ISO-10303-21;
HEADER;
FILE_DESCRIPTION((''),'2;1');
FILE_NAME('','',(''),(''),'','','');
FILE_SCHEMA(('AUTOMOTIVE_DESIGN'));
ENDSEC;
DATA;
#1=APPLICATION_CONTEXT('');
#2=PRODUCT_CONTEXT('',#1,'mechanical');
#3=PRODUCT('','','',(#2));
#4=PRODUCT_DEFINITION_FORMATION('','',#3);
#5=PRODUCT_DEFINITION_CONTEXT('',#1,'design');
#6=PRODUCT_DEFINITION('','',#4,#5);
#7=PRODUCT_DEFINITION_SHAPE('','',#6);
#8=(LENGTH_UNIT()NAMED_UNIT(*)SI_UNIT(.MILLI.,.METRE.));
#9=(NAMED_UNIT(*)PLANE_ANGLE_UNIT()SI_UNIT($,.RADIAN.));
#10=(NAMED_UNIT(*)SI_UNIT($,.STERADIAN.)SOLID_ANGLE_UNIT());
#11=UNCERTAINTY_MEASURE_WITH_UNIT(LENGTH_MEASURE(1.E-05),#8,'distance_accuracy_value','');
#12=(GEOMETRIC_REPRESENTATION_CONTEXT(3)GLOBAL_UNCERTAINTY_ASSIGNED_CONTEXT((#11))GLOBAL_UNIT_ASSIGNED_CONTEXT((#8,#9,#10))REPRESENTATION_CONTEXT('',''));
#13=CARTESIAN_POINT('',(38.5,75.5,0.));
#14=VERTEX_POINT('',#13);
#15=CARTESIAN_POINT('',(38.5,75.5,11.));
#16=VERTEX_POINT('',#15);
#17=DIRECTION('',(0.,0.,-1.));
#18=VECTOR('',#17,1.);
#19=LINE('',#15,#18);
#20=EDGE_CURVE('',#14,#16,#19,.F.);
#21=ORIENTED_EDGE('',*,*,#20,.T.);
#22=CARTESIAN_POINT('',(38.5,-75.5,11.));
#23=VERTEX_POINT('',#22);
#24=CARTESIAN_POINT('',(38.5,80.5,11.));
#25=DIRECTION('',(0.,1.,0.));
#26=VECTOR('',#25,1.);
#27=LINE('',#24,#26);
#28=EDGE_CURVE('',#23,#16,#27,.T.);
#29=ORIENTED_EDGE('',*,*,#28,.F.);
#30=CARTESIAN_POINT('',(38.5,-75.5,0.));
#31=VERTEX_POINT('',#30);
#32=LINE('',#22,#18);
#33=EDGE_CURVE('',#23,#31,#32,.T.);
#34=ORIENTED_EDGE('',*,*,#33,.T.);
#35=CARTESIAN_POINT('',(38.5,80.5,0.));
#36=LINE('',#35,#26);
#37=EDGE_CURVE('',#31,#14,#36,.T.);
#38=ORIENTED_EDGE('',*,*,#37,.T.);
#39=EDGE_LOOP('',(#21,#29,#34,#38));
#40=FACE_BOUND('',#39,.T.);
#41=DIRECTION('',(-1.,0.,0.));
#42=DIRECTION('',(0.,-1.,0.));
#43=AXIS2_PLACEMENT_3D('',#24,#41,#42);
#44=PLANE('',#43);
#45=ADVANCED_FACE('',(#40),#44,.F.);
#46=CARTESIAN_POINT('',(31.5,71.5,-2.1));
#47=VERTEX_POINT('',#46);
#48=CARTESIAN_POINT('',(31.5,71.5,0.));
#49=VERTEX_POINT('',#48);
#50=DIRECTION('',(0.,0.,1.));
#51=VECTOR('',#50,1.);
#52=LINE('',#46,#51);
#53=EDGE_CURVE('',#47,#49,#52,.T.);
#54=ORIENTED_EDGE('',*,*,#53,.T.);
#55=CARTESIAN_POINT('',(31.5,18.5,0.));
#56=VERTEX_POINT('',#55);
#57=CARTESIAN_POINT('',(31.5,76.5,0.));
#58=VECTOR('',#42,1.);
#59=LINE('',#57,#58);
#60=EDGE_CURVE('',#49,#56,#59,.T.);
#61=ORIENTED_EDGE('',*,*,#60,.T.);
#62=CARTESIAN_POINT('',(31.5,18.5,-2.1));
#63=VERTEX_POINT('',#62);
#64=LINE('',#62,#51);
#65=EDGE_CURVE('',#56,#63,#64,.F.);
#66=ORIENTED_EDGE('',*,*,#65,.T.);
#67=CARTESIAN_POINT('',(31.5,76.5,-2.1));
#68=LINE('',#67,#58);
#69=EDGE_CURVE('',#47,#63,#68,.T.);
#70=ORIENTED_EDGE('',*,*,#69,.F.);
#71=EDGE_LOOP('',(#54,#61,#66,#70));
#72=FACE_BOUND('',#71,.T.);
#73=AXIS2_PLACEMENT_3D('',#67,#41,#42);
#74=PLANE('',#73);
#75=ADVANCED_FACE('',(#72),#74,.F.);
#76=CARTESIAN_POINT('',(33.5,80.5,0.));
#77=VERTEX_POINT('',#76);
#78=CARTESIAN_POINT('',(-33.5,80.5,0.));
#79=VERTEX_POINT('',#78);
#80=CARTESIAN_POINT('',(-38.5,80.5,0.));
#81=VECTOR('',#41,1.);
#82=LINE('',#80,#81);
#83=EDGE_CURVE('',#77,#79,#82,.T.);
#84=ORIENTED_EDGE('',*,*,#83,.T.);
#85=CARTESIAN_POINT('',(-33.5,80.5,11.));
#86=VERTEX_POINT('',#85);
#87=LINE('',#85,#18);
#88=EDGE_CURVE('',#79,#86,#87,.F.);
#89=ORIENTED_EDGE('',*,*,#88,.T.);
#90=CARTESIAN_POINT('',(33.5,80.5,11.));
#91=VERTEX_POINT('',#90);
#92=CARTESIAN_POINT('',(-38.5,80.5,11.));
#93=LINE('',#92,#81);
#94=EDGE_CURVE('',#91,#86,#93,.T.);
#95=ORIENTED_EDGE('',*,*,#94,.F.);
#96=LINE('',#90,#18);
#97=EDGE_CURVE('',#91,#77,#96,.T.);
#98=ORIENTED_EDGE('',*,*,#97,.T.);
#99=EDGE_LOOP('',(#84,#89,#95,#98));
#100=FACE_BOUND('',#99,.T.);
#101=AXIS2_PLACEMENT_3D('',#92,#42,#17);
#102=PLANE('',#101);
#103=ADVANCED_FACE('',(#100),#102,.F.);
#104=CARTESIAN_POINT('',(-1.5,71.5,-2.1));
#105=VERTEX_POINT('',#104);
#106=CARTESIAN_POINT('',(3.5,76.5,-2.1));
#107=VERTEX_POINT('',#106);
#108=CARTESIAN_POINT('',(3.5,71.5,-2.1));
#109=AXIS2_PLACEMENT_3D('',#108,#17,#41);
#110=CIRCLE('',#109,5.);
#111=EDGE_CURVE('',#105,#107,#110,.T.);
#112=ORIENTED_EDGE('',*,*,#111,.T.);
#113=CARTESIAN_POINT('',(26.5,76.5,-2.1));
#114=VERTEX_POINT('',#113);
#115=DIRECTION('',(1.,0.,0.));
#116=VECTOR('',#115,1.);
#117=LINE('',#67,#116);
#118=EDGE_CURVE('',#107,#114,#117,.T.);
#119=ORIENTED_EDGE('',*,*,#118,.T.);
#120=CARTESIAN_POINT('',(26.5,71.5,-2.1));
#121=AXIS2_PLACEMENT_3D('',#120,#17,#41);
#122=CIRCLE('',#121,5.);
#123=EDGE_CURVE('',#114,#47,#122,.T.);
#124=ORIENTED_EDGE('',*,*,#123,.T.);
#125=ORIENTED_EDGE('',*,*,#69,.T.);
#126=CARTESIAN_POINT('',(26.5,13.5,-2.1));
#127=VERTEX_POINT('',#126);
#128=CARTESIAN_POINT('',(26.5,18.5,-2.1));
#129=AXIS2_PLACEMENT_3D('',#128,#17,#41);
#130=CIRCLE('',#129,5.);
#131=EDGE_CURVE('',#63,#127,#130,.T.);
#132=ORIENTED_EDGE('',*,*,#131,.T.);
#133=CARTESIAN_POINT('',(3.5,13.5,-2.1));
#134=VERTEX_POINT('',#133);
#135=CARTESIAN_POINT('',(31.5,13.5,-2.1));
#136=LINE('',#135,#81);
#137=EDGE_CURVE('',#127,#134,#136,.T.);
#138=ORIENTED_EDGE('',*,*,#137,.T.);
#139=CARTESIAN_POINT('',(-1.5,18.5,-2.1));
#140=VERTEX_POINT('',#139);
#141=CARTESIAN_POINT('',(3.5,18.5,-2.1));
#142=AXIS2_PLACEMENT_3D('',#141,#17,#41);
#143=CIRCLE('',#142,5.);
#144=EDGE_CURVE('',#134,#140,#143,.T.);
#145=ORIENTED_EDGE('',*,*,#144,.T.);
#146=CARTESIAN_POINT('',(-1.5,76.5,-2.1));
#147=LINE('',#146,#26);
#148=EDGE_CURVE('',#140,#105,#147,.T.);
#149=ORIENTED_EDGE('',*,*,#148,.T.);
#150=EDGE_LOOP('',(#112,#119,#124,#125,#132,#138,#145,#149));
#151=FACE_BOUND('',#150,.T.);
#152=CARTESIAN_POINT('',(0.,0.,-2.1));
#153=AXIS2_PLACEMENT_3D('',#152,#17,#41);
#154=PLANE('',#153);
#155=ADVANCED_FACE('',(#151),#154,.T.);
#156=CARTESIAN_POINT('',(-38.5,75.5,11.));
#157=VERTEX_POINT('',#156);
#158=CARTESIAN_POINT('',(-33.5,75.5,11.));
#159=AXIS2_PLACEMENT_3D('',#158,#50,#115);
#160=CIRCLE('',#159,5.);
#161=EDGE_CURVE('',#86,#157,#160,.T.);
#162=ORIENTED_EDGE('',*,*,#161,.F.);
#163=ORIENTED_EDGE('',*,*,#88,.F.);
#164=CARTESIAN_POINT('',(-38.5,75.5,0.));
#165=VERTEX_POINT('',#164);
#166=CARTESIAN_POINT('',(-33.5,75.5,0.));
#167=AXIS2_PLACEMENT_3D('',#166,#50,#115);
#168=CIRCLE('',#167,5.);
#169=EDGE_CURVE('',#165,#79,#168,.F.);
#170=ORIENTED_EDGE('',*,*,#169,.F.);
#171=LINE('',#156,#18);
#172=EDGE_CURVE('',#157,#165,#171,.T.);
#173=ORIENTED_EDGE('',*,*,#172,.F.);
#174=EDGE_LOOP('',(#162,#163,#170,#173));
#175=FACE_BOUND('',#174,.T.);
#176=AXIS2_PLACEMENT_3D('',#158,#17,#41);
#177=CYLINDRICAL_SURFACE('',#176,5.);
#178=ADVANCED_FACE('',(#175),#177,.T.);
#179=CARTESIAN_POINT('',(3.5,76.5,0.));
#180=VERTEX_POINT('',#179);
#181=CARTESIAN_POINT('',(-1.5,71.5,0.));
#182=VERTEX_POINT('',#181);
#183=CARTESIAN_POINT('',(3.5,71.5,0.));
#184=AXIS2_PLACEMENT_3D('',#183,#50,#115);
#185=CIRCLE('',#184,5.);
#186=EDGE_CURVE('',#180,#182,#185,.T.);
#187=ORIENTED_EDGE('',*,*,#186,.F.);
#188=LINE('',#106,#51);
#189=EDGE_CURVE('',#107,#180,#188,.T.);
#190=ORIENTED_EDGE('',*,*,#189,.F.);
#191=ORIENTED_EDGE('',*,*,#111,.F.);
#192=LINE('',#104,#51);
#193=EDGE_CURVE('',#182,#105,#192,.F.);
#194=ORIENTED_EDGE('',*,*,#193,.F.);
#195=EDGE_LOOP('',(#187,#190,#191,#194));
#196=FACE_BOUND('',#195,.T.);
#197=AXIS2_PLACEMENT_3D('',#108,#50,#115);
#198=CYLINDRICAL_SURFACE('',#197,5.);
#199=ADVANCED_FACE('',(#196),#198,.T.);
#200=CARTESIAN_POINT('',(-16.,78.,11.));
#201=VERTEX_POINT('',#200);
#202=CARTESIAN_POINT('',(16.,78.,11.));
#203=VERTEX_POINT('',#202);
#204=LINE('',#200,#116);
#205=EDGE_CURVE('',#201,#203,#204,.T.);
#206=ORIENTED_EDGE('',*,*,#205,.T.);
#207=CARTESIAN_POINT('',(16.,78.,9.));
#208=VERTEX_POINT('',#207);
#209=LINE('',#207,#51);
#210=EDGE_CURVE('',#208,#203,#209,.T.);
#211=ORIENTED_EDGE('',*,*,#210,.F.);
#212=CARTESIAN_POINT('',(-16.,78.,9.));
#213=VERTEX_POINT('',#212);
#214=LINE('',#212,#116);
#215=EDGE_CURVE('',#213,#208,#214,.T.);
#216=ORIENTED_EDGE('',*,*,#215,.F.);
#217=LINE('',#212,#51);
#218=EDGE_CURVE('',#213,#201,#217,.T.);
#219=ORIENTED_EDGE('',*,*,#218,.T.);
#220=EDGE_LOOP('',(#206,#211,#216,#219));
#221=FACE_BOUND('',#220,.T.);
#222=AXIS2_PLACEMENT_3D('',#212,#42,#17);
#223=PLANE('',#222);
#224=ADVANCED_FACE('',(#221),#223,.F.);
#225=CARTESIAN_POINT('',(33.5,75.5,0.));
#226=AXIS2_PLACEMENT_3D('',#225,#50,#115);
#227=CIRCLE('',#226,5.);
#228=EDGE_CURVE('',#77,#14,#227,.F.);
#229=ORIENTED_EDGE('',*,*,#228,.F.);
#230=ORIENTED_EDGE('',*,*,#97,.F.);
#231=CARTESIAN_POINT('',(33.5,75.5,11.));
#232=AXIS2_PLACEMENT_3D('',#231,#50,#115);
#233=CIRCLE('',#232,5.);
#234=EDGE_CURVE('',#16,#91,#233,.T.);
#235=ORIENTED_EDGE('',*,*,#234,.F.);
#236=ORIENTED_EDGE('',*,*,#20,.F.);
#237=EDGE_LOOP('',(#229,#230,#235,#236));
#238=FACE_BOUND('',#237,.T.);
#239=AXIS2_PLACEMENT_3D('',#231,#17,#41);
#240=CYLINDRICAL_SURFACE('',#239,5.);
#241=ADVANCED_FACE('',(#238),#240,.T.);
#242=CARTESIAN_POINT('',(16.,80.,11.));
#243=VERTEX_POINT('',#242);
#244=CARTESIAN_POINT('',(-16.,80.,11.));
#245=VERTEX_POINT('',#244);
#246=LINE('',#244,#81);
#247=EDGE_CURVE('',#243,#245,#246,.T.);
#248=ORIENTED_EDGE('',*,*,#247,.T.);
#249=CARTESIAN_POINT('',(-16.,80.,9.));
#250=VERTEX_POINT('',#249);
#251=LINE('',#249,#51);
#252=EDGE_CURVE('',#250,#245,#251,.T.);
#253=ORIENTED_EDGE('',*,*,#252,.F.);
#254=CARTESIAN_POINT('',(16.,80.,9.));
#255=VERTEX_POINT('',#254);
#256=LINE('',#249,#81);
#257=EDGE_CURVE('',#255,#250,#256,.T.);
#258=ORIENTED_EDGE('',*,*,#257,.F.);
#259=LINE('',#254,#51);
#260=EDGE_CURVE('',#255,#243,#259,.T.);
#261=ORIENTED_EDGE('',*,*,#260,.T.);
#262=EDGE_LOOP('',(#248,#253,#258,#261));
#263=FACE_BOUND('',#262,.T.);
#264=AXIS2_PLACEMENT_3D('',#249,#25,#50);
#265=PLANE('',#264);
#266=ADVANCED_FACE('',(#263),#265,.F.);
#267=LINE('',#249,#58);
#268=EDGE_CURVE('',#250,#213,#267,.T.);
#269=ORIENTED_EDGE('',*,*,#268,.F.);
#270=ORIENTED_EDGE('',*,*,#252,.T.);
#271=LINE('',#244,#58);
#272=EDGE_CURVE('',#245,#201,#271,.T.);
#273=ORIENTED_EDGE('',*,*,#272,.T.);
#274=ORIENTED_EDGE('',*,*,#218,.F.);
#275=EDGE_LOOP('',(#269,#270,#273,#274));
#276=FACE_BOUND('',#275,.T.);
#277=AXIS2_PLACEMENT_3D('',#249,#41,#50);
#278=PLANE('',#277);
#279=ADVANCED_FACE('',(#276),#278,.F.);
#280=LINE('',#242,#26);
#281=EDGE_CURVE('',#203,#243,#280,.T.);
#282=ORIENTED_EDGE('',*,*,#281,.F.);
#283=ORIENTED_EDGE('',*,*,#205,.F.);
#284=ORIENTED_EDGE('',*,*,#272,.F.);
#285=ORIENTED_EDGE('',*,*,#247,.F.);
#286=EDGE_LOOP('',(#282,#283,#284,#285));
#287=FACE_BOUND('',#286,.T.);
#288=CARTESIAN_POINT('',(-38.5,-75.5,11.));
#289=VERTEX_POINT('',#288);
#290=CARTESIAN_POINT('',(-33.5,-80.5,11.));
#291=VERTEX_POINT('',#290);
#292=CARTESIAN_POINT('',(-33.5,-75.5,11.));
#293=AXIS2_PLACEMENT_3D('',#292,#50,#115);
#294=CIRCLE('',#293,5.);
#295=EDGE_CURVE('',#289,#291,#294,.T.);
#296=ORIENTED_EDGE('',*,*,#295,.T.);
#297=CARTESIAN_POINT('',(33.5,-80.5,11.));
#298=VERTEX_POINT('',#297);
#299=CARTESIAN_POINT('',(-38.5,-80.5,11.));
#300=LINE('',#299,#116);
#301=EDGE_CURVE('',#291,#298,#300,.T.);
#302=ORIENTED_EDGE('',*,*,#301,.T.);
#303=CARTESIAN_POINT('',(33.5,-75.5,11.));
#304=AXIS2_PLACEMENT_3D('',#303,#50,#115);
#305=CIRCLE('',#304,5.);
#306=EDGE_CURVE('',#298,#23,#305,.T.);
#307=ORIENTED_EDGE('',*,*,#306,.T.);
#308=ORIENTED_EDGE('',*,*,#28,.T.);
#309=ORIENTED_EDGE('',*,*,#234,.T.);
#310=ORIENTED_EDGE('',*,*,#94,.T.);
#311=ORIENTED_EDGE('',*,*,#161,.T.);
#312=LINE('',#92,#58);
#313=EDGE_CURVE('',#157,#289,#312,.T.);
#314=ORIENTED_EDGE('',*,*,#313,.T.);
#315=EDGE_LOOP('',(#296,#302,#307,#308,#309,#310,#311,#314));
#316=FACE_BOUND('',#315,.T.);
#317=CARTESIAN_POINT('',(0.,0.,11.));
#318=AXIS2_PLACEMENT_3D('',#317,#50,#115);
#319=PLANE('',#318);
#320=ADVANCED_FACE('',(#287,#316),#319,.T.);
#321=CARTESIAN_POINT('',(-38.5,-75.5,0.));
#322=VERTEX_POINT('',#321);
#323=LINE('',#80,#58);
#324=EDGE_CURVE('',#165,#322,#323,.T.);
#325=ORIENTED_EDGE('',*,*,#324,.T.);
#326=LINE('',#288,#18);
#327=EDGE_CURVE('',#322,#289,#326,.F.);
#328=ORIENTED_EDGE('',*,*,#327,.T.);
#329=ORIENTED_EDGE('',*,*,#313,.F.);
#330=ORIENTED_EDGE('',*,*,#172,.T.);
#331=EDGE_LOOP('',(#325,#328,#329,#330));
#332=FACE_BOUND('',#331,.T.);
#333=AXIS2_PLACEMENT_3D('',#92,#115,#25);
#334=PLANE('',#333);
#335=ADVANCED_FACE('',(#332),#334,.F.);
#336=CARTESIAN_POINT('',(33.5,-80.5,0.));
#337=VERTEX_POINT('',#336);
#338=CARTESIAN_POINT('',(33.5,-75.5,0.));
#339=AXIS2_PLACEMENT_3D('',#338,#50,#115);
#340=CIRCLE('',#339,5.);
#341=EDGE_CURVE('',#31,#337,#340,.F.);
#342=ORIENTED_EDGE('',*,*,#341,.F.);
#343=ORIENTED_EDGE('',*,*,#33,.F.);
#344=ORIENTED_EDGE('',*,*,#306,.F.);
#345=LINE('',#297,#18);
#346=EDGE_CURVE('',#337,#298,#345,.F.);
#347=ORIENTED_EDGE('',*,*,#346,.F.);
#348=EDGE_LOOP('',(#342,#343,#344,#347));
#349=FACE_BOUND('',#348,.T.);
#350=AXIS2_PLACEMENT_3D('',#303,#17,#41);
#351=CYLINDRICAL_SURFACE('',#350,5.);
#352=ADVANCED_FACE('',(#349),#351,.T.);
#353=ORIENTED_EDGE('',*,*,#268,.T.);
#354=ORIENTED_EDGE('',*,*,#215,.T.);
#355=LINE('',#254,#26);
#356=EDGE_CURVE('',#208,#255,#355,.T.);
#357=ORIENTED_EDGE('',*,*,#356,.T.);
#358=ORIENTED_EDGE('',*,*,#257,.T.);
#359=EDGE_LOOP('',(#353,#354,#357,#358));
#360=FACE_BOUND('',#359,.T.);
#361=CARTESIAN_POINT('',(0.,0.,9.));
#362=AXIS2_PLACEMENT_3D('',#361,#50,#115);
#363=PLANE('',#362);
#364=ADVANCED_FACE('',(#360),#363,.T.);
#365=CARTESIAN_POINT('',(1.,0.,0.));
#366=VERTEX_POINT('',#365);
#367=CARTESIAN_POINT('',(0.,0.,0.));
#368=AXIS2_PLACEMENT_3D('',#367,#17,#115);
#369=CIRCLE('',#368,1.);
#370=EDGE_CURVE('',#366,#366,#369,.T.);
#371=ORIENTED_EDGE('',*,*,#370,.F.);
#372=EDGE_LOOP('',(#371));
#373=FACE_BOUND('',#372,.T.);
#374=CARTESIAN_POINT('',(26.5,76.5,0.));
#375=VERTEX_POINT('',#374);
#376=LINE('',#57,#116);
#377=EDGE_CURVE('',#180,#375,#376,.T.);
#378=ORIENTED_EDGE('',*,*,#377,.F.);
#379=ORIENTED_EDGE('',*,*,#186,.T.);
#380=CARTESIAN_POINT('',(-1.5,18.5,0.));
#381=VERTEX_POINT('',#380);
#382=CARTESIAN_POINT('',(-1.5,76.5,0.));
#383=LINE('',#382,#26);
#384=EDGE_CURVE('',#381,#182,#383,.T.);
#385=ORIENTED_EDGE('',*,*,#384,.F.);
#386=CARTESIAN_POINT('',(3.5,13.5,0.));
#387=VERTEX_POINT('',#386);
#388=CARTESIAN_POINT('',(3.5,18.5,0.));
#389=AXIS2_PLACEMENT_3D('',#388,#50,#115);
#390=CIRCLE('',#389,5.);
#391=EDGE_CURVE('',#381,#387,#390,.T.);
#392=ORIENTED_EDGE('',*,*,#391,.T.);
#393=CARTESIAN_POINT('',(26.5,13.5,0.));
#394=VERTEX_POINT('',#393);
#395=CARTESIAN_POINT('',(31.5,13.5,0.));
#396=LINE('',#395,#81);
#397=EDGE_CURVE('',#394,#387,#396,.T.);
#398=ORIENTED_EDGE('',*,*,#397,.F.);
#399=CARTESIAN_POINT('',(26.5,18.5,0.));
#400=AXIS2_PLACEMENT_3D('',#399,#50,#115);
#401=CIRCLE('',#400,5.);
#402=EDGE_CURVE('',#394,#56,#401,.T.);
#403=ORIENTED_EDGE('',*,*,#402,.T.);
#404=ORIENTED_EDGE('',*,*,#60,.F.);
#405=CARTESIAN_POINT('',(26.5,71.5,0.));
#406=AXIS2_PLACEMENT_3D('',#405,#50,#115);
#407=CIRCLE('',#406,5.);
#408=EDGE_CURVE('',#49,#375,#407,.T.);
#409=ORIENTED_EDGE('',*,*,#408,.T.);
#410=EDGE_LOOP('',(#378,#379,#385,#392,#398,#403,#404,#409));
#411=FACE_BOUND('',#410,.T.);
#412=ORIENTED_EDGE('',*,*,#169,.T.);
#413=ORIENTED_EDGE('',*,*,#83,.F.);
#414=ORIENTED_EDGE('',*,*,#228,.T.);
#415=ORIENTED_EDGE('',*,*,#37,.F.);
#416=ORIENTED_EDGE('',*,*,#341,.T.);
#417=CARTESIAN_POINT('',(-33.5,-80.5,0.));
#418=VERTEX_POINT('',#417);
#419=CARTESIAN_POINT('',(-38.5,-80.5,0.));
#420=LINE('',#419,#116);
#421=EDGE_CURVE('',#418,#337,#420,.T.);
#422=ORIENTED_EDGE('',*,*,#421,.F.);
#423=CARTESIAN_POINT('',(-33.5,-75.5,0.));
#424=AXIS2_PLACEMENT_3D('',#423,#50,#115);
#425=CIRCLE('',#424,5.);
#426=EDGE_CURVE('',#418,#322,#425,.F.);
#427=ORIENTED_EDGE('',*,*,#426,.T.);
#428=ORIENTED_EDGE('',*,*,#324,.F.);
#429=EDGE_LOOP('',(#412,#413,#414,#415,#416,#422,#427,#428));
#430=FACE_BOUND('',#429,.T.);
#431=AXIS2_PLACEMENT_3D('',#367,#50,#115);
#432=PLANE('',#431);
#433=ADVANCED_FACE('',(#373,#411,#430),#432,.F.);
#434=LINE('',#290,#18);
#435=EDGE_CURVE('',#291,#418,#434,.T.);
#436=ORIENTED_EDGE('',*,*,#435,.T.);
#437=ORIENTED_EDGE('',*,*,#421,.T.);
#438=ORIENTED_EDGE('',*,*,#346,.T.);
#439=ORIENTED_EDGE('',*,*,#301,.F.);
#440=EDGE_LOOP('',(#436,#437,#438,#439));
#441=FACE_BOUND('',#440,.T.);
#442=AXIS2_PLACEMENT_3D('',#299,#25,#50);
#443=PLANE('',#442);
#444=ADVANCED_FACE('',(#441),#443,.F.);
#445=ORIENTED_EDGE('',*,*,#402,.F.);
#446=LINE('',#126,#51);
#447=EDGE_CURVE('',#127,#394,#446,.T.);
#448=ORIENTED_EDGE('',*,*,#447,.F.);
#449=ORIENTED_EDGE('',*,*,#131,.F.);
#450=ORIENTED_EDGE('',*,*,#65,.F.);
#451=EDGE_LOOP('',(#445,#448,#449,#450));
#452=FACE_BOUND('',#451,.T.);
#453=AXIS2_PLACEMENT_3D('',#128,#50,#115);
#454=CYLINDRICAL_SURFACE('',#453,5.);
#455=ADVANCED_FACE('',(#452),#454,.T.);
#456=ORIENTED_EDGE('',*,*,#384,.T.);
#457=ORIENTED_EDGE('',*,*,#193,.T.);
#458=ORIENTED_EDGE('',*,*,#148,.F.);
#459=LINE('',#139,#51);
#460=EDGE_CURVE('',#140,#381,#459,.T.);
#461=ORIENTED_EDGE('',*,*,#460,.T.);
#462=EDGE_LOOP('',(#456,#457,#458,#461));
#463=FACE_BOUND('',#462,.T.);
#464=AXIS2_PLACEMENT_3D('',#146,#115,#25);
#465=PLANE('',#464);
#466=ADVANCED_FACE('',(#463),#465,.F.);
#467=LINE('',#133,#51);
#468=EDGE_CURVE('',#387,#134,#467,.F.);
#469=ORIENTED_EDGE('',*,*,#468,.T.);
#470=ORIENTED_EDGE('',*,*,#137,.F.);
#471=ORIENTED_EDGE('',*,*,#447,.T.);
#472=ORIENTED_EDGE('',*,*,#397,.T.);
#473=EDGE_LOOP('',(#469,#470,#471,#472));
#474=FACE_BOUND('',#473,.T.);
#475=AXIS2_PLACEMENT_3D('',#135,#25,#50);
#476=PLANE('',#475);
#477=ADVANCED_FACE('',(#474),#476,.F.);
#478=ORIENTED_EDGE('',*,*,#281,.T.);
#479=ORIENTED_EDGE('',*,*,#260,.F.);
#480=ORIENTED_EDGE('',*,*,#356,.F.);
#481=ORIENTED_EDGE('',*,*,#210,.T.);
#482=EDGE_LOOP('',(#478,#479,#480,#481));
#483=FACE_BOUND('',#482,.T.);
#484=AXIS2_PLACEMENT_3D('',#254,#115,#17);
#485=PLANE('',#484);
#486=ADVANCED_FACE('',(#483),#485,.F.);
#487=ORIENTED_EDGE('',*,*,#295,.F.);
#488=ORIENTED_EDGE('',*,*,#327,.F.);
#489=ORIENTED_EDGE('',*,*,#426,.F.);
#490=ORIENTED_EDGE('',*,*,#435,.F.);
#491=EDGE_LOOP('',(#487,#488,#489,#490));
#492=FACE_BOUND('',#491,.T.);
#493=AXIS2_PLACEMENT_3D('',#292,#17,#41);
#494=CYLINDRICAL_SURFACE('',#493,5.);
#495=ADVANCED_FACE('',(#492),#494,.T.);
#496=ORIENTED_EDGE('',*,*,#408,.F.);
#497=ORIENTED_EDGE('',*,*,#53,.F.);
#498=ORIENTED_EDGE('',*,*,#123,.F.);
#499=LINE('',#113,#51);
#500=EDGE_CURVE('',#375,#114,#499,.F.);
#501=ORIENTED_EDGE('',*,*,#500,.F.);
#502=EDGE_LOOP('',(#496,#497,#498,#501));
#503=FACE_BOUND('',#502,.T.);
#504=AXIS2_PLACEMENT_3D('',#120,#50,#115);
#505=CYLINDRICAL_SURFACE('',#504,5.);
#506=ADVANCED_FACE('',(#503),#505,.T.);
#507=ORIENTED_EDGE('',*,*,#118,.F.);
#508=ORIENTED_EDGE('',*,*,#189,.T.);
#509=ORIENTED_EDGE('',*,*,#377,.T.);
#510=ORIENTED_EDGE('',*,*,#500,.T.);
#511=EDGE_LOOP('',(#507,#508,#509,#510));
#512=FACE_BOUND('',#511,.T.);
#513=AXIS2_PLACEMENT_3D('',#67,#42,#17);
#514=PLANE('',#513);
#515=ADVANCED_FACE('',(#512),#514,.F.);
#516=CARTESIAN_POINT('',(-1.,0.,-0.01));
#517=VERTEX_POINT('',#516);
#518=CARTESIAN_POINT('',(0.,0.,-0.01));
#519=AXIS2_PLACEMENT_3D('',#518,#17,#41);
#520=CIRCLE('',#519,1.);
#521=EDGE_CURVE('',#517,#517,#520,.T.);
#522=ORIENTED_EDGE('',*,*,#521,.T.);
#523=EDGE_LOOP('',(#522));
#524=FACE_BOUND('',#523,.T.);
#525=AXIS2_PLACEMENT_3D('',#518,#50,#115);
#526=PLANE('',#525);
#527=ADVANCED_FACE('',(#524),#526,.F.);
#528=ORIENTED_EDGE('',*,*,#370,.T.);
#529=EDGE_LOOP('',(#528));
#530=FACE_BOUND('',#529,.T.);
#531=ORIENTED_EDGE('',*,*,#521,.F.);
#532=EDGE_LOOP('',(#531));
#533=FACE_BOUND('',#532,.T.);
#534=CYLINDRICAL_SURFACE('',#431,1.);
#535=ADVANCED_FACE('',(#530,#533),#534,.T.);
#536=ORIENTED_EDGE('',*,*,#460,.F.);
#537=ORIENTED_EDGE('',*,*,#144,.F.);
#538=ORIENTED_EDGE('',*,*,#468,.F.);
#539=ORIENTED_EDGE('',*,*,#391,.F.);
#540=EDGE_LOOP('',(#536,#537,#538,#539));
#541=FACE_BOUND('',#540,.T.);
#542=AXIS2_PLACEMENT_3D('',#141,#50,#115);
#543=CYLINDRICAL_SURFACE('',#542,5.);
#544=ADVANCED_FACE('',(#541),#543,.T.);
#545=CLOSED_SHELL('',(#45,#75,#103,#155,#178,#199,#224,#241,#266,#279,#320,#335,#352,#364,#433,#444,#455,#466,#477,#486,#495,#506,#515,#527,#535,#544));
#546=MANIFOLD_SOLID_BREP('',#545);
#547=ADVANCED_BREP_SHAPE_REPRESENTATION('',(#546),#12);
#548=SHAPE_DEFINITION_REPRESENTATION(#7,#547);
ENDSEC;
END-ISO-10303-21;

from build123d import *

# Parameters (mm, degrees)
SKETCH_1_W          = 77
SKETCH_1_H          = 161
EXTRUDE_1_DEPTH     = 11
SKETCH_2_W          = 33
SKETCH_2_H          = 63
EXTRUDE_2_DEPTH     = 2.1
FILLET_1_R          = 5
FILLET_2_R          = 5
SKETCH_3_W          = 32
SKETCH_3_H          = 2
CUT_EXTRUDE_1_DEPTH = 2
WRAP_1_OUTLINE_R    = 1
WRAP_1_DEPTH        = 0.01


# Read off the part's stored shape, not the designer's step: 包覆1
with BuildPart() as part:
    # 草图1 → 凸台-拉伸1 (new body)
    with BuildSketch(Plane.XY):
        Rectangle(SKETCH_1_W, SKETCH_1_H)
    extrude(amount=EXTRUDE_1_DEPTH)

    # 草图2 → 凸台-拉伸2 (add)
    with BuildSketch(Plane(origin=(0, 0, 0), x_dir=(-1, 0, 0), z_dir=(0, 0, -1))):
        with Locations((-15, 45)):
            Rectangle(SKETCH_2_W, SKETCH_2_H)
    extrude(amount=EXTRUDE_2_DEPTH)

    # 圆角1
    fillet_1_edges = [part.edges().sort_by_distance(p)[0] for p in [
        (31.5, 76.5, -1.05),
        (31.5, 13.5, -1.05),
        (-1.5, 13.5, -1.05),
        (-1.5, 76.5, -1.05),
    ]]
    fillet(fillet_1_edges, radius=FILLET_1_R)

    # 圆角2
    fillet_2_edges = [part.edges().sort_by_distance(p)[0] for p in [
        (38.5, -80.5, 5.5),
        (-38.5, -80.5, 5.5),
        (-38.5, 80.5, 5.5),
        (38.5, 80.5, 5.5),
    ]]
    fillet(fillet_2_edges, radius=FILLET_2_R)

    # 草图3 → 切除-拉伸1 (cut)
    with BuildSketch(Plane.XY.offset(11)):
        with Locations((0, 79)):
            Rectangle(SKETCH_3_W, SKETCH_3_H)
    extrude(amount=-CUT_EXTRUDE_1_DEPTH, mode=Mode.SUBTRACT)

    # 包覆1 outline → 包覆1 (add)
    with BuildSketch(Plane(origin=(0, 0, 0), x_dir=(-1, 0, 0), z_dir=(0, 0, -1))):
        Circle(WRAP_1_OUTLINE_R)
    extrude(amount=WRAP_1_DEPTH)


solid = part.part
